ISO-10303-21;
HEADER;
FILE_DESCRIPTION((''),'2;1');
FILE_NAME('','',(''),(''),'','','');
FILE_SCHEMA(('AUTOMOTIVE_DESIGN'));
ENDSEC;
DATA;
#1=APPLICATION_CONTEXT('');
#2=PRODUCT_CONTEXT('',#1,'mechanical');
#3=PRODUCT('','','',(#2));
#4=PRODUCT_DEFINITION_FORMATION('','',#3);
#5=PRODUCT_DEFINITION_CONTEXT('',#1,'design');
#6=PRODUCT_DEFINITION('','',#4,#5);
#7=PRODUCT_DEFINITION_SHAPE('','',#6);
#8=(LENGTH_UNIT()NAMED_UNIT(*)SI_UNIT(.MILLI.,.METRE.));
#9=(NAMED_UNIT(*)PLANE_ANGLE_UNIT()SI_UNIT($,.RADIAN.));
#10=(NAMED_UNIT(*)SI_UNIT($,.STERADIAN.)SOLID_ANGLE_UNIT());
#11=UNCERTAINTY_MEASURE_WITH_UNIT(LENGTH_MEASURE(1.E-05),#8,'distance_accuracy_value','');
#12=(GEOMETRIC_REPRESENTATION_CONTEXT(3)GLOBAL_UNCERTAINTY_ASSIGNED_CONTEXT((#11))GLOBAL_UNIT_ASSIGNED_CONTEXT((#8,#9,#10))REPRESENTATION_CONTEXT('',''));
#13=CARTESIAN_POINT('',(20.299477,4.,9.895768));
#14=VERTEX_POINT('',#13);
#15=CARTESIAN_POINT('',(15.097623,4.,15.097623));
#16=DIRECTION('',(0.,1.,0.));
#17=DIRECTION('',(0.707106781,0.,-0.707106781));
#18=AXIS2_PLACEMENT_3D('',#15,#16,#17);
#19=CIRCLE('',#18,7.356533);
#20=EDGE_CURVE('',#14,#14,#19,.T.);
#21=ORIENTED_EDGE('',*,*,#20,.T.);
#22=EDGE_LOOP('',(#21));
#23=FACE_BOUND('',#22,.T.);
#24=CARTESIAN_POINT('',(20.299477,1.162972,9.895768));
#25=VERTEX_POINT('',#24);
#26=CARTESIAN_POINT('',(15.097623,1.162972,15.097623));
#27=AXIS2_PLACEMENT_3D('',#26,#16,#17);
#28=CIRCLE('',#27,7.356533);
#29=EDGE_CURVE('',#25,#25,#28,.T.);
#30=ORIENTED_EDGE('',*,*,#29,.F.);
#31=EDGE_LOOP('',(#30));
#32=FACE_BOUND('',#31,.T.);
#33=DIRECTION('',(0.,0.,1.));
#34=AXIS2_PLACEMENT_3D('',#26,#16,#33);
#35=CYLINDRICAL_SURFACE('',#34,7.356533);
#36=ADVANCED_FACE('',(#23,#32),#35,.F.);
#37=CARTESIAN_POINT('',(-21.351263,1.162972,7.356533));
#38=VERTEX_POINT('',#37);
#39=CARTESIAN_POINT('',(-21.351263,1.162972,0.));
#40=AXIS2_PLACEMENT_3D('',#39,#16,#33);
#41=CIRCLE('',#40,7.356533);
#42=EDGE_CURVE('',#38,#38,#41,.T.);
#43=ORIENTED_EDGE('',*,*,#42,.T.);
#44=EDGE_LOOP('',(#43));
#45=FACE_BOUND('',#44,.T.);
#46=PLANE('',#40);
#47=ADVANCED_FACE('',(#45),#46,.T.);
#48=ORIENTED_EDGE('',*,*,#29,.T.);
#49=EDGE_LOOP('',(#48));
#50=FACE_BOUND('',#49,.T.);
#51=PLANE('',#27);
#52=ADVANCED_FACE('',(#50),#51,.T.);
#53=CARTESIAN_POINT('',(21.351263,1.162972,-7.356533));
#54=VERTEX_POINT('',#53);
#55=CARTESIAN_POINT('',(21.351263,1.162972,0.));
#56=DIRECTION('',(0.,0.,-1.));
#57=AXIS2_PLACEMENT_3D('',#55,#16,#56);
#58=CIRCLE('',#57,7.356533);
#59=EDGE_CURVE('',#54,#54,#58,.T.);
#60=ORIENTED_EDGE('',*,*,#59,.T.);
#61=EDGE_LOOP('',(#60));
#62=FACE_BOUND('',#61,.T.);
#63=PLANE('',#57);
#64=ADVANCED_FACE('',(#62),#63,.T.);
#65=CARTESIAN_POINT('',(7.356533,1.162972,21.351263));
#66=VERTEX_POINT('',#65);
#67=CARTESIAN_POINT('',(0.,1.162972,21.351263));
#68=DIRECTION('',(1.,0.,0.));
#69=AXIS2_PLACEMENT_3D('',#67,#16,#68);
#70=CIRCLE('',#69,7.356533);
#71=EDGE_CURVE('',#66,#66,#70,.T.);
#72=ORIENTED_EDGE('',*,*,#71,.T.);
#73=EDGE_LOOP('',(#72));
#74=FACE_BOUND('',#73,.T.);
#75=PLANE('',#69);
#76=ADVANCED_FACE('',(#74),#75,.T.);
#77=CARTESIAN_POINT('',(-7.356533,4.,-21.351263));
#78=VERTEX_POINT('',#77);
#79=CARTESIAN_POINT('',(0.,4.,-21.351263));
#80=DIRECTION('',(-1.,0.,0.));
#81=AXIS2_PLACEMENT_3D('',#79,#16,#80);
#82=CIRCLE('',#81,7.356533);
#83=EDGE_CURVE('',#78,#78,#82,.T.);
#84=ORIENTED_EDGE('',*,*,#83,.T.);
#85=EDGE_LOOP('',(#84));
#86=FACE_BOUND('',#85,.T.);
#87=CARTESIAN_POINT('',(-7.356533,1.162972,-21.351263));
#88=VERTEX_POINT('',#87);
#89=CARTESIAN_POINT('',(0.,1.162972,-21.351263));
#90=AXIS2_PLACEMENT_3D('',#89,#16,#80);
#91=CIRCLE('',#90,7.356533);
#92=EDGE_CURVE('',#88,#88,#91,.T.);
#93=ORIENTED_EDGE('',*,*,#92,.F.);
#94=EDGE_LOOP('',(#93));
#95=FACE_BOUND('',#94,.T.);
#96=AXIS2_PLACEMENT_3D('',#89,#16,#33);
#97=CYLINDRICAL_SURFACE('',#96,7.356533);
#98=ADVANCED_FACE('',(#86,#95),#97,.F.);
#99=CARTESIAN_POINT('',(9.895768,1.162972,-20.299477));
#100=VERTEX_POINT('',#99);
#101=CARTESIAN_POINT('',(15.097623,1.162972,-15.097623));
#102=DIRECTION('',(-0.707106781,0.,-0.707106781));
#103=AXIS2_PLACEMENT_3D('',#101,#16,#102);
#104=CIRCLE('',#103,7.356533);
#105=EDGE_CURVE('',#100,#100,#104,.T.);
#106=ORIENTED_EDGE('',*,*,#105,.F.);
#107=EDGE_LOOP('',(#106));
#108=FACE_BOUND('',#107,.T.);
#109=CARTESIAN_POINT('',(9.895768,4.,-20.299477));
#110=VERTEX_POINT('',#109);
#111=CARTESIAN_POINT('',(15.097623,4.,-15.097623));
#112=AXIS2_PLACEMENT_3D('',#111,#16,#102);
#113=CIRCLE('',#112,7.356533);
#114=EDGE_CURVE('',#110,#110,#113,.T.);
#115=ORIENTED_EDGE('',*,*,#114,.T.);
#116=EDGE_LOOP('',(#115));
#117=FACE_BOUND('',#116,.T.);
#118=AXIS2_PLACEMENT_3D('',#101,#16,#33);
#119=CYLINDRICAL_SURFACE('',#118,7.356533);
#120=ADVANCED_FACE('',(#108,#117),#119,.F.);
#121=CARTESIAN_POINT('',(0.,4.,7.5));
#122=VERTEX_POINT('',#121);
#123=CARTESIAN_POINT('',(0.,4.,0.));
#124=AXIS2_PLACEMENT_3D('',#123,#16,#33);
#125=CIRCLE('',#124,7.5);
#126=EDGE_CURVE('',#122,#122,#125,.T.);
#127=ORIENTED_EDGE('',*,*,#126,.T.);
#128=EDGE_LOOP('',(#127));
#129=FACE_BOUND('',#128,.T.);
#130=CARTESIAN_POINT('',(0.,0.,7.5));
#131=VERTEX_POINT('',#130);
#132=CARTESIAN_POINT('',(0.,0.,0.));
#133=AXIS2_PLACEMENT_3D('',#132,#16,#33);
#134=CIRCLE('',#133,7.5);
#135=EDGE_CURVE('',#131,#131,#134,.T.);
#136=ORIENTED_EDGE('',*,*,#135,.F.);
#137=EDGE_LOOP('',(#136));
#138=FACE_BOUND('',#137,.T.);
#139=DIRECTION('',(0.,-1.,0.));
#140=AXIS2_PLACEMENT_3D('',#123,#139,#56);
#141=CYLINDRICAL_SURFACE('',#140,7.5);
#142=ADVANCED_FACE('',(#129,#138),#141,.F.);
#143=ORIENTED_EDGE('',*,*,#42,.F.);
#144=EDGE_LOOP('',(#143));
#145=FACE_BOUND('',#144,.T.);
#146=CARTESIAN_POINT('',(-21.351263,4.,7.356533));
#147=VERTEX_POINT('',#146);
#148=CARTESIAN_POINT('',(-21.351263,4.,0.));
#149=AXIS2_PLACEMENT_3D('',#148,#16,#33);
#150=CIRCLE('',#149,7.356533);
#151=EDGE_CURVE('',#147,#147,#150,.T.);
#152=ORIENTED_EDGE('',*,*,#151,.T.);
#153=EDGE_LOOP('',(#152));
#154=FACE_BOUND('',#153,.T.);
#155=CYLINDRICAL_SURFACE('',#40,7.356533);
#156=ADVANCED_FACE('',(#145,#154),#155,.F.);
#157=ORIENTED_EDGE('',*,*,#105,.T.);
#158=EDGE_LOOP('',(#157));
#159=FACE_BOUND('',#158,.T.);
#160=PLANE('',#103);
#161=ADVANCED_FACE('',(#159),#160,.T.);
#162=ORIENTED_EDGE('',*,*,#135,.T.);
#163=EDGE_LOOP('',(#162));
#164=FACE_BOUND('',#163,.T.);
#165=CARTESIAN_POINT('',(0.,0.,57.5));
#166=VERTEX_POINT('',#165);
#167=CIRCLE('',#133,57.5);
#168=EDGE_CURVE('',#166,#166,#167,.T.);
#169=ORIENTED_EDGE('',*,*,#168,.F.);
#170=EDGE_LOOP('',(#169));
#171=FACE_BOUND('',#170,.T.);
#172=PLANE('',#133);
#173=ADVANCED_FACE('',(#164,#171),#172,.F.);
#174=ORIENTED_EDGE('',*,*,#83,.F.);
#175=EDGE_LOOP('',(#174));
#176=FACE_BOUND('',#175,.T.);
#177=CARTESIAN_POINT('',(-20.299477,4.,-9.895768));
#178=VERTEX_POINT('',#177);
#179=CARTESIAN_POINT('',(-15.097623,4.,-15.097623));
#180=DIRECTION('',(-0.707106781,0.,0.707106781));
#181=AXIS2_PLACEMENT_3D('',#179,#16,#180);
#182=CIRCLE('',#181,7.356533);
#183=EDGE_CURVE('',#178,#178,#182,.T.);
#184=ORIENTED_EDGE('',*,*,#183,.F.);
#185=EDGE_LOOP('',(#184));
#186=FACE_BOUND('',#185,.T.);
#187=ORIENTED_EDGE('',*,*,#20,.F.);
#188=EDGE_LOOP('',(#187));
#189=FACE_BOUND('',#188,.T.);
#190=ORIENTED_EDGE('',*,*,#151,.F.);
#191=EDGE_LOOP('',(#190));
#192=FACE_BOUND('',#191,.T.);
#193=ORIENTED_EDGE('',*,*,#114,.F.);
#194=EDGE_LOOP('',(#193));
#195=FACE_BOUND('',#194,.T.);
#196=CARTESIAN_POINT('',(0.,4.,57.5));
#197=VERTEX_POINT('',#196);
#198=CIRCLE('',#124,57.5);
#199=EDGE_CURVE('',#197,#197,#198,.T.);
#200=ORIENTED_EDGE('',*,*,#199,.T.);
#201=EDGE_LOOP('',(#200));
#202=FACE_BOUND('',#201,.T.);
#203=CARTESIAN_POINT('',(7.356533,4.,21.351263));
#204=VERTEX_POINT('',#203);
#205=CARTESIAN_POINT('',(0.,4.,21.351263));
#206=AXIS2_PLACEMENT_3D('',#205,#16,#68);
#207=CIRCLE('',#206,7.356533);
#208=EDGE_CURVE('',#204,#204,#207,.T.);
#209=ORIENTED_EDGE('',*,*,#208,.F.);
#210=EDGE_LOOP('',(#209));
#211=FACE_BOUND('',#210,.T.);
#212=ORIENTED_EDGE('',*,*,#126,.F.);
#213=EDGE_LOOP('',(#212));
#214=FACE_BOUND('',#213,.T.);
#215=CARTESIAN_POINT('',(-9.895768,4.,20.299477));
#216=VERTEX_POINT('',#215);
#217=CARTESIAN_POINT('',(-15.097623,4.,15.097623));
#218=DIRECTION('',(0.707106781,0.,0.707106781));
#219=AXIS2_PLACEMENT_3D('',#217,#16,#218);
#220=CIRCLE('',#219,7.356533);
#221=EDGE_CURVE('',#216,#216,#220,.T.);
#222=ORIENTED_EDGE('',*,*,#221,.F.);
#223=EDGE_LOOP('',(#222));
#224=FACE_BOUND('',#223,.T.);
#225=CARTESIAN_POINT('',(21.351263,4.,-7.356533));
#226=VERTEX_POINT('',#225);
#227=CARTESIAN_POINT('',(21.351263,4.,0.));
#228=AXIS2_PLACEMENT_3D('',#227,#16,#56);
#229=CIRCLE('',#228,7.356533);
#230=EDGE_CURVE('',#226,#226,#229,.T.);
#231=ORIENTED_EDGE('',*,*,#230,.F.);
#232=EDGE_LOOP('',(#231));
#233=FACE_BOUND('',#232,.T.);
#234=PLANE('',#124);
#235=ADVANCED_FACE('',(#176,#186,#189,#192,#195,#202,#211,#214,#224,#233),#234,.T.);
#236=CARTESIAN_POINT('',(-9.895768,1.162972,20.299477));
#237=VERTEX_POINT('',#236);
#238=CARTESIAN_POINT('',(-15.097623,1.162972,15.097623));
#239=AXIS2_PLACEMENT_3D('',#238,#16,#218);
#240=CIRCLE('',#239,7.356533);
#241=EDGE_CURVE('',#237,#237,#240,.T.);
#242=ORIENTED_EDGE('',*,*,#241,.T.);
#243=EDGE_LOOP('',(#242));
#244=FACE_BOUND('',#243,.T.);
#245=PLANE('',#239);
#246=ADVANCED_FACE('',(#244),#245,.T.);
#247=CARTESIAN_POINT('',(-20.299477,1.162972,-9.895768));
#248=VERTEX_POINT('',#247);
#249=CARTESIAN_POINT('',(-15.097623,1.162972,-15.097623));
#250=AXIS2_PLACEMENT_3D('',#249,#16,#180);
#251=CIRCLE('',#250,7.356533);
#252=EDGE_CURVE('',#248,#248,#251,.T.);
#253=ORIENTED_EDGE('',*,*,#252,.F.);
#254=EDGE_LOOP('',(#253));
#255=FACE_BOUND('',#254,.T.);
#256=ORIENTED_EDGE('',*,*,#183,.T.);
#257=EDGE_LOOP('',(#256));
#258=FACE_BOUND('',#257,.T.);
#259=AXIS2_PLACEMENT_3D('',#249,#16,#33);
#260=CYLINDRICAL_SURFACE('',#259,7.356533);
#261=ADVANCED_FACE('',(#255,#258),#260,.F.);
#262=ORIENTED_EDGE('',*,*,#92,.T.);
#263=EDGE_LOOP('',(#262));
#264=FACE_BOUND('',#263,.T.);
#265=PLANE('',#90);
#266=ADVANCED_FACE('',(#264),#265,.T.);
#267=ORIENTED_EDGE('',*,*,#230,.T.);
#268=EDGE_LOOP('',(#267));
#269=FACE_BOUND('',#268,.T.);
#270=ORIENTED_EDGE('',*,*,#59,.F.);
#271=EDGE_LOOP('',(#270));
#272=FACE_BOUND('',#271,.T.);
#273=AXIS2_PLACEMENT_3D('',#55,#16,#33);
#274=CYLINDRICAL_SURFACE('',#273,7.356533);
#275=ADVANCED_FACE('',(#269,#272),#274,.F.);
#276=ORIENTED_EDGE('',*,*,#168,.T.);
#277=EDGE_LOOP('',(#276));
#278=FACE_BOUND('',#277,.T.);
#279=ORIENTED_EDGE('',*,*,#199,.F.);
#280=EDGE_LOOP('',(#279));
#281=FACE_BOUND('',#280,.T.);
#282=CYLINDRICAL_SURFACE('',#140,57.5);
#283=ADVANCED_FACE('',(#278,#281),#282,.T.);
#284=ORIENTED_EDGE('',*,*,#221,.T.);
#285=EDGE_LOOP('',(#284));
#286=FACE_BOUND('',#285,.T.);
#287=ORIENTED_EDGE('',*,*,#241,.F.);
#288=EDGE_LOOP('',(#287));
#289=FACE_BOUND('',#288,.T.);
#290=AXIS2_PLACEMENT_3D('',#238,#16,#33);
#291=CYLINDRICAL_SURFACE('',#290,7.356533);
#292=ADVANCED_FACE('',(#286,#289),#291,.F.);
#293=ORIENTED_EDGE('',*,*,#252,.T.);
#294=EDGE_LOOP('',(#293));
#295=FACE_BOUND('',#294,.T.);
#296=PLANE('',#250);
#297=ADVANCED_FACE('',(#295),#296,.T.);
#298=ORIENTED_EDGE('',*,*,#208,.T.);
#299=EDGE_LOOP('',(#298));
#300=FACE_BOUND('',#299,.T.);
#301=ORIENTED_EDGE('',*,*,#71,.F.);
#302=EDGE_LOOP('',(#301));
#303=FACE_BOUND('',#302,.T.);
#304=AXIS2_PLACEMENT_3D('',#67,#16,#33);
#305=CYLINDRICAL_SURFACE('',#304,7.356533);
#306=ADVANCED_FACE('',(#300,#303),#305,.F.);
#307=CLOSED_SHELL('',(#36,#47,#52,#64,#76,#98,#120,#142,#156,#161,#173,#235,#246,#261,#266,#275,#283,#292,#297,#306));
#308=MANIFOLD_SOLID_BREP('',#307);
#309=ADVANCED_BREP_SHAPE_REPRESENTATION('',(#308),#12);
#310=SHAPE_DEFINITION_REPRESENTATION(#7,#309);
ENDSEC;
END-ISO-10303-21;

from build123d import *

# Parameters (mm, degrees)
SKETCH1_R           = 57.5
BOSS_EXTRUDE1_DEPTH = 4
SKETCH2_R           = 7.5
CUT_EXTRUDE1_DEPTH  = 82.415600471
SKETCH3_R           = 7.356533407
CUT_EXTRUDE2_DEPTH  = 2.837028008
CIRPATTERN1_COUNT   = 8


with BuildPart() as part:
    # Sketch1 → Boss-Extrude1 (new body)
    with BuildSketch(Plane(origin=(0, 0, 0), x_dir=(1, 0, 0), z_dir=(0, 1, 0))):
        Circle(SKETCH1_R)
    extrude(amount=BOSS_EXTRUDE1_DEPTH)

    # Sketch2 → Cut-Extrude1 (cut, through all)
    with BuildSketch(Plane(origin=(0, 0, 0), x_dir=(1, 0, 0), z_dir=(0, 1, 0))):
        Circle(SKETCH2_R)
    extrude(amount=CUT_EXTRUDE1_DEPTH, mode=Mode.SUBTRACT)

    # Sketch3 → Cut-Extrude2 (cut)
    with BuildSketch(Plane(origin=(0, 4, 0), x_dir=(1, 0, 0), z_dir=(0, 1, 0))):
        with Locations((-21.351262807, 0)):
            Circle(SKETCH3_R)
    cut_extrude2 = extrude(amount=-CUT_EXTRUDE2_DEPTH, mode=Mode.SUBTRACT)

    # CirPattern1: Cut-Extrude2 ×8 about axis
    cirpattern1_axis = Axis((0, 0, 0), (0, 1, 0))
    for i in range(1, CIRPATTERN1_COUNT):
        add(cut_extrude2.rotate(cirpattern1_axis, i * 360 / CIRPATTERN1_COUNT), mode=Mode.SUBTRACT)


solid = part.part
